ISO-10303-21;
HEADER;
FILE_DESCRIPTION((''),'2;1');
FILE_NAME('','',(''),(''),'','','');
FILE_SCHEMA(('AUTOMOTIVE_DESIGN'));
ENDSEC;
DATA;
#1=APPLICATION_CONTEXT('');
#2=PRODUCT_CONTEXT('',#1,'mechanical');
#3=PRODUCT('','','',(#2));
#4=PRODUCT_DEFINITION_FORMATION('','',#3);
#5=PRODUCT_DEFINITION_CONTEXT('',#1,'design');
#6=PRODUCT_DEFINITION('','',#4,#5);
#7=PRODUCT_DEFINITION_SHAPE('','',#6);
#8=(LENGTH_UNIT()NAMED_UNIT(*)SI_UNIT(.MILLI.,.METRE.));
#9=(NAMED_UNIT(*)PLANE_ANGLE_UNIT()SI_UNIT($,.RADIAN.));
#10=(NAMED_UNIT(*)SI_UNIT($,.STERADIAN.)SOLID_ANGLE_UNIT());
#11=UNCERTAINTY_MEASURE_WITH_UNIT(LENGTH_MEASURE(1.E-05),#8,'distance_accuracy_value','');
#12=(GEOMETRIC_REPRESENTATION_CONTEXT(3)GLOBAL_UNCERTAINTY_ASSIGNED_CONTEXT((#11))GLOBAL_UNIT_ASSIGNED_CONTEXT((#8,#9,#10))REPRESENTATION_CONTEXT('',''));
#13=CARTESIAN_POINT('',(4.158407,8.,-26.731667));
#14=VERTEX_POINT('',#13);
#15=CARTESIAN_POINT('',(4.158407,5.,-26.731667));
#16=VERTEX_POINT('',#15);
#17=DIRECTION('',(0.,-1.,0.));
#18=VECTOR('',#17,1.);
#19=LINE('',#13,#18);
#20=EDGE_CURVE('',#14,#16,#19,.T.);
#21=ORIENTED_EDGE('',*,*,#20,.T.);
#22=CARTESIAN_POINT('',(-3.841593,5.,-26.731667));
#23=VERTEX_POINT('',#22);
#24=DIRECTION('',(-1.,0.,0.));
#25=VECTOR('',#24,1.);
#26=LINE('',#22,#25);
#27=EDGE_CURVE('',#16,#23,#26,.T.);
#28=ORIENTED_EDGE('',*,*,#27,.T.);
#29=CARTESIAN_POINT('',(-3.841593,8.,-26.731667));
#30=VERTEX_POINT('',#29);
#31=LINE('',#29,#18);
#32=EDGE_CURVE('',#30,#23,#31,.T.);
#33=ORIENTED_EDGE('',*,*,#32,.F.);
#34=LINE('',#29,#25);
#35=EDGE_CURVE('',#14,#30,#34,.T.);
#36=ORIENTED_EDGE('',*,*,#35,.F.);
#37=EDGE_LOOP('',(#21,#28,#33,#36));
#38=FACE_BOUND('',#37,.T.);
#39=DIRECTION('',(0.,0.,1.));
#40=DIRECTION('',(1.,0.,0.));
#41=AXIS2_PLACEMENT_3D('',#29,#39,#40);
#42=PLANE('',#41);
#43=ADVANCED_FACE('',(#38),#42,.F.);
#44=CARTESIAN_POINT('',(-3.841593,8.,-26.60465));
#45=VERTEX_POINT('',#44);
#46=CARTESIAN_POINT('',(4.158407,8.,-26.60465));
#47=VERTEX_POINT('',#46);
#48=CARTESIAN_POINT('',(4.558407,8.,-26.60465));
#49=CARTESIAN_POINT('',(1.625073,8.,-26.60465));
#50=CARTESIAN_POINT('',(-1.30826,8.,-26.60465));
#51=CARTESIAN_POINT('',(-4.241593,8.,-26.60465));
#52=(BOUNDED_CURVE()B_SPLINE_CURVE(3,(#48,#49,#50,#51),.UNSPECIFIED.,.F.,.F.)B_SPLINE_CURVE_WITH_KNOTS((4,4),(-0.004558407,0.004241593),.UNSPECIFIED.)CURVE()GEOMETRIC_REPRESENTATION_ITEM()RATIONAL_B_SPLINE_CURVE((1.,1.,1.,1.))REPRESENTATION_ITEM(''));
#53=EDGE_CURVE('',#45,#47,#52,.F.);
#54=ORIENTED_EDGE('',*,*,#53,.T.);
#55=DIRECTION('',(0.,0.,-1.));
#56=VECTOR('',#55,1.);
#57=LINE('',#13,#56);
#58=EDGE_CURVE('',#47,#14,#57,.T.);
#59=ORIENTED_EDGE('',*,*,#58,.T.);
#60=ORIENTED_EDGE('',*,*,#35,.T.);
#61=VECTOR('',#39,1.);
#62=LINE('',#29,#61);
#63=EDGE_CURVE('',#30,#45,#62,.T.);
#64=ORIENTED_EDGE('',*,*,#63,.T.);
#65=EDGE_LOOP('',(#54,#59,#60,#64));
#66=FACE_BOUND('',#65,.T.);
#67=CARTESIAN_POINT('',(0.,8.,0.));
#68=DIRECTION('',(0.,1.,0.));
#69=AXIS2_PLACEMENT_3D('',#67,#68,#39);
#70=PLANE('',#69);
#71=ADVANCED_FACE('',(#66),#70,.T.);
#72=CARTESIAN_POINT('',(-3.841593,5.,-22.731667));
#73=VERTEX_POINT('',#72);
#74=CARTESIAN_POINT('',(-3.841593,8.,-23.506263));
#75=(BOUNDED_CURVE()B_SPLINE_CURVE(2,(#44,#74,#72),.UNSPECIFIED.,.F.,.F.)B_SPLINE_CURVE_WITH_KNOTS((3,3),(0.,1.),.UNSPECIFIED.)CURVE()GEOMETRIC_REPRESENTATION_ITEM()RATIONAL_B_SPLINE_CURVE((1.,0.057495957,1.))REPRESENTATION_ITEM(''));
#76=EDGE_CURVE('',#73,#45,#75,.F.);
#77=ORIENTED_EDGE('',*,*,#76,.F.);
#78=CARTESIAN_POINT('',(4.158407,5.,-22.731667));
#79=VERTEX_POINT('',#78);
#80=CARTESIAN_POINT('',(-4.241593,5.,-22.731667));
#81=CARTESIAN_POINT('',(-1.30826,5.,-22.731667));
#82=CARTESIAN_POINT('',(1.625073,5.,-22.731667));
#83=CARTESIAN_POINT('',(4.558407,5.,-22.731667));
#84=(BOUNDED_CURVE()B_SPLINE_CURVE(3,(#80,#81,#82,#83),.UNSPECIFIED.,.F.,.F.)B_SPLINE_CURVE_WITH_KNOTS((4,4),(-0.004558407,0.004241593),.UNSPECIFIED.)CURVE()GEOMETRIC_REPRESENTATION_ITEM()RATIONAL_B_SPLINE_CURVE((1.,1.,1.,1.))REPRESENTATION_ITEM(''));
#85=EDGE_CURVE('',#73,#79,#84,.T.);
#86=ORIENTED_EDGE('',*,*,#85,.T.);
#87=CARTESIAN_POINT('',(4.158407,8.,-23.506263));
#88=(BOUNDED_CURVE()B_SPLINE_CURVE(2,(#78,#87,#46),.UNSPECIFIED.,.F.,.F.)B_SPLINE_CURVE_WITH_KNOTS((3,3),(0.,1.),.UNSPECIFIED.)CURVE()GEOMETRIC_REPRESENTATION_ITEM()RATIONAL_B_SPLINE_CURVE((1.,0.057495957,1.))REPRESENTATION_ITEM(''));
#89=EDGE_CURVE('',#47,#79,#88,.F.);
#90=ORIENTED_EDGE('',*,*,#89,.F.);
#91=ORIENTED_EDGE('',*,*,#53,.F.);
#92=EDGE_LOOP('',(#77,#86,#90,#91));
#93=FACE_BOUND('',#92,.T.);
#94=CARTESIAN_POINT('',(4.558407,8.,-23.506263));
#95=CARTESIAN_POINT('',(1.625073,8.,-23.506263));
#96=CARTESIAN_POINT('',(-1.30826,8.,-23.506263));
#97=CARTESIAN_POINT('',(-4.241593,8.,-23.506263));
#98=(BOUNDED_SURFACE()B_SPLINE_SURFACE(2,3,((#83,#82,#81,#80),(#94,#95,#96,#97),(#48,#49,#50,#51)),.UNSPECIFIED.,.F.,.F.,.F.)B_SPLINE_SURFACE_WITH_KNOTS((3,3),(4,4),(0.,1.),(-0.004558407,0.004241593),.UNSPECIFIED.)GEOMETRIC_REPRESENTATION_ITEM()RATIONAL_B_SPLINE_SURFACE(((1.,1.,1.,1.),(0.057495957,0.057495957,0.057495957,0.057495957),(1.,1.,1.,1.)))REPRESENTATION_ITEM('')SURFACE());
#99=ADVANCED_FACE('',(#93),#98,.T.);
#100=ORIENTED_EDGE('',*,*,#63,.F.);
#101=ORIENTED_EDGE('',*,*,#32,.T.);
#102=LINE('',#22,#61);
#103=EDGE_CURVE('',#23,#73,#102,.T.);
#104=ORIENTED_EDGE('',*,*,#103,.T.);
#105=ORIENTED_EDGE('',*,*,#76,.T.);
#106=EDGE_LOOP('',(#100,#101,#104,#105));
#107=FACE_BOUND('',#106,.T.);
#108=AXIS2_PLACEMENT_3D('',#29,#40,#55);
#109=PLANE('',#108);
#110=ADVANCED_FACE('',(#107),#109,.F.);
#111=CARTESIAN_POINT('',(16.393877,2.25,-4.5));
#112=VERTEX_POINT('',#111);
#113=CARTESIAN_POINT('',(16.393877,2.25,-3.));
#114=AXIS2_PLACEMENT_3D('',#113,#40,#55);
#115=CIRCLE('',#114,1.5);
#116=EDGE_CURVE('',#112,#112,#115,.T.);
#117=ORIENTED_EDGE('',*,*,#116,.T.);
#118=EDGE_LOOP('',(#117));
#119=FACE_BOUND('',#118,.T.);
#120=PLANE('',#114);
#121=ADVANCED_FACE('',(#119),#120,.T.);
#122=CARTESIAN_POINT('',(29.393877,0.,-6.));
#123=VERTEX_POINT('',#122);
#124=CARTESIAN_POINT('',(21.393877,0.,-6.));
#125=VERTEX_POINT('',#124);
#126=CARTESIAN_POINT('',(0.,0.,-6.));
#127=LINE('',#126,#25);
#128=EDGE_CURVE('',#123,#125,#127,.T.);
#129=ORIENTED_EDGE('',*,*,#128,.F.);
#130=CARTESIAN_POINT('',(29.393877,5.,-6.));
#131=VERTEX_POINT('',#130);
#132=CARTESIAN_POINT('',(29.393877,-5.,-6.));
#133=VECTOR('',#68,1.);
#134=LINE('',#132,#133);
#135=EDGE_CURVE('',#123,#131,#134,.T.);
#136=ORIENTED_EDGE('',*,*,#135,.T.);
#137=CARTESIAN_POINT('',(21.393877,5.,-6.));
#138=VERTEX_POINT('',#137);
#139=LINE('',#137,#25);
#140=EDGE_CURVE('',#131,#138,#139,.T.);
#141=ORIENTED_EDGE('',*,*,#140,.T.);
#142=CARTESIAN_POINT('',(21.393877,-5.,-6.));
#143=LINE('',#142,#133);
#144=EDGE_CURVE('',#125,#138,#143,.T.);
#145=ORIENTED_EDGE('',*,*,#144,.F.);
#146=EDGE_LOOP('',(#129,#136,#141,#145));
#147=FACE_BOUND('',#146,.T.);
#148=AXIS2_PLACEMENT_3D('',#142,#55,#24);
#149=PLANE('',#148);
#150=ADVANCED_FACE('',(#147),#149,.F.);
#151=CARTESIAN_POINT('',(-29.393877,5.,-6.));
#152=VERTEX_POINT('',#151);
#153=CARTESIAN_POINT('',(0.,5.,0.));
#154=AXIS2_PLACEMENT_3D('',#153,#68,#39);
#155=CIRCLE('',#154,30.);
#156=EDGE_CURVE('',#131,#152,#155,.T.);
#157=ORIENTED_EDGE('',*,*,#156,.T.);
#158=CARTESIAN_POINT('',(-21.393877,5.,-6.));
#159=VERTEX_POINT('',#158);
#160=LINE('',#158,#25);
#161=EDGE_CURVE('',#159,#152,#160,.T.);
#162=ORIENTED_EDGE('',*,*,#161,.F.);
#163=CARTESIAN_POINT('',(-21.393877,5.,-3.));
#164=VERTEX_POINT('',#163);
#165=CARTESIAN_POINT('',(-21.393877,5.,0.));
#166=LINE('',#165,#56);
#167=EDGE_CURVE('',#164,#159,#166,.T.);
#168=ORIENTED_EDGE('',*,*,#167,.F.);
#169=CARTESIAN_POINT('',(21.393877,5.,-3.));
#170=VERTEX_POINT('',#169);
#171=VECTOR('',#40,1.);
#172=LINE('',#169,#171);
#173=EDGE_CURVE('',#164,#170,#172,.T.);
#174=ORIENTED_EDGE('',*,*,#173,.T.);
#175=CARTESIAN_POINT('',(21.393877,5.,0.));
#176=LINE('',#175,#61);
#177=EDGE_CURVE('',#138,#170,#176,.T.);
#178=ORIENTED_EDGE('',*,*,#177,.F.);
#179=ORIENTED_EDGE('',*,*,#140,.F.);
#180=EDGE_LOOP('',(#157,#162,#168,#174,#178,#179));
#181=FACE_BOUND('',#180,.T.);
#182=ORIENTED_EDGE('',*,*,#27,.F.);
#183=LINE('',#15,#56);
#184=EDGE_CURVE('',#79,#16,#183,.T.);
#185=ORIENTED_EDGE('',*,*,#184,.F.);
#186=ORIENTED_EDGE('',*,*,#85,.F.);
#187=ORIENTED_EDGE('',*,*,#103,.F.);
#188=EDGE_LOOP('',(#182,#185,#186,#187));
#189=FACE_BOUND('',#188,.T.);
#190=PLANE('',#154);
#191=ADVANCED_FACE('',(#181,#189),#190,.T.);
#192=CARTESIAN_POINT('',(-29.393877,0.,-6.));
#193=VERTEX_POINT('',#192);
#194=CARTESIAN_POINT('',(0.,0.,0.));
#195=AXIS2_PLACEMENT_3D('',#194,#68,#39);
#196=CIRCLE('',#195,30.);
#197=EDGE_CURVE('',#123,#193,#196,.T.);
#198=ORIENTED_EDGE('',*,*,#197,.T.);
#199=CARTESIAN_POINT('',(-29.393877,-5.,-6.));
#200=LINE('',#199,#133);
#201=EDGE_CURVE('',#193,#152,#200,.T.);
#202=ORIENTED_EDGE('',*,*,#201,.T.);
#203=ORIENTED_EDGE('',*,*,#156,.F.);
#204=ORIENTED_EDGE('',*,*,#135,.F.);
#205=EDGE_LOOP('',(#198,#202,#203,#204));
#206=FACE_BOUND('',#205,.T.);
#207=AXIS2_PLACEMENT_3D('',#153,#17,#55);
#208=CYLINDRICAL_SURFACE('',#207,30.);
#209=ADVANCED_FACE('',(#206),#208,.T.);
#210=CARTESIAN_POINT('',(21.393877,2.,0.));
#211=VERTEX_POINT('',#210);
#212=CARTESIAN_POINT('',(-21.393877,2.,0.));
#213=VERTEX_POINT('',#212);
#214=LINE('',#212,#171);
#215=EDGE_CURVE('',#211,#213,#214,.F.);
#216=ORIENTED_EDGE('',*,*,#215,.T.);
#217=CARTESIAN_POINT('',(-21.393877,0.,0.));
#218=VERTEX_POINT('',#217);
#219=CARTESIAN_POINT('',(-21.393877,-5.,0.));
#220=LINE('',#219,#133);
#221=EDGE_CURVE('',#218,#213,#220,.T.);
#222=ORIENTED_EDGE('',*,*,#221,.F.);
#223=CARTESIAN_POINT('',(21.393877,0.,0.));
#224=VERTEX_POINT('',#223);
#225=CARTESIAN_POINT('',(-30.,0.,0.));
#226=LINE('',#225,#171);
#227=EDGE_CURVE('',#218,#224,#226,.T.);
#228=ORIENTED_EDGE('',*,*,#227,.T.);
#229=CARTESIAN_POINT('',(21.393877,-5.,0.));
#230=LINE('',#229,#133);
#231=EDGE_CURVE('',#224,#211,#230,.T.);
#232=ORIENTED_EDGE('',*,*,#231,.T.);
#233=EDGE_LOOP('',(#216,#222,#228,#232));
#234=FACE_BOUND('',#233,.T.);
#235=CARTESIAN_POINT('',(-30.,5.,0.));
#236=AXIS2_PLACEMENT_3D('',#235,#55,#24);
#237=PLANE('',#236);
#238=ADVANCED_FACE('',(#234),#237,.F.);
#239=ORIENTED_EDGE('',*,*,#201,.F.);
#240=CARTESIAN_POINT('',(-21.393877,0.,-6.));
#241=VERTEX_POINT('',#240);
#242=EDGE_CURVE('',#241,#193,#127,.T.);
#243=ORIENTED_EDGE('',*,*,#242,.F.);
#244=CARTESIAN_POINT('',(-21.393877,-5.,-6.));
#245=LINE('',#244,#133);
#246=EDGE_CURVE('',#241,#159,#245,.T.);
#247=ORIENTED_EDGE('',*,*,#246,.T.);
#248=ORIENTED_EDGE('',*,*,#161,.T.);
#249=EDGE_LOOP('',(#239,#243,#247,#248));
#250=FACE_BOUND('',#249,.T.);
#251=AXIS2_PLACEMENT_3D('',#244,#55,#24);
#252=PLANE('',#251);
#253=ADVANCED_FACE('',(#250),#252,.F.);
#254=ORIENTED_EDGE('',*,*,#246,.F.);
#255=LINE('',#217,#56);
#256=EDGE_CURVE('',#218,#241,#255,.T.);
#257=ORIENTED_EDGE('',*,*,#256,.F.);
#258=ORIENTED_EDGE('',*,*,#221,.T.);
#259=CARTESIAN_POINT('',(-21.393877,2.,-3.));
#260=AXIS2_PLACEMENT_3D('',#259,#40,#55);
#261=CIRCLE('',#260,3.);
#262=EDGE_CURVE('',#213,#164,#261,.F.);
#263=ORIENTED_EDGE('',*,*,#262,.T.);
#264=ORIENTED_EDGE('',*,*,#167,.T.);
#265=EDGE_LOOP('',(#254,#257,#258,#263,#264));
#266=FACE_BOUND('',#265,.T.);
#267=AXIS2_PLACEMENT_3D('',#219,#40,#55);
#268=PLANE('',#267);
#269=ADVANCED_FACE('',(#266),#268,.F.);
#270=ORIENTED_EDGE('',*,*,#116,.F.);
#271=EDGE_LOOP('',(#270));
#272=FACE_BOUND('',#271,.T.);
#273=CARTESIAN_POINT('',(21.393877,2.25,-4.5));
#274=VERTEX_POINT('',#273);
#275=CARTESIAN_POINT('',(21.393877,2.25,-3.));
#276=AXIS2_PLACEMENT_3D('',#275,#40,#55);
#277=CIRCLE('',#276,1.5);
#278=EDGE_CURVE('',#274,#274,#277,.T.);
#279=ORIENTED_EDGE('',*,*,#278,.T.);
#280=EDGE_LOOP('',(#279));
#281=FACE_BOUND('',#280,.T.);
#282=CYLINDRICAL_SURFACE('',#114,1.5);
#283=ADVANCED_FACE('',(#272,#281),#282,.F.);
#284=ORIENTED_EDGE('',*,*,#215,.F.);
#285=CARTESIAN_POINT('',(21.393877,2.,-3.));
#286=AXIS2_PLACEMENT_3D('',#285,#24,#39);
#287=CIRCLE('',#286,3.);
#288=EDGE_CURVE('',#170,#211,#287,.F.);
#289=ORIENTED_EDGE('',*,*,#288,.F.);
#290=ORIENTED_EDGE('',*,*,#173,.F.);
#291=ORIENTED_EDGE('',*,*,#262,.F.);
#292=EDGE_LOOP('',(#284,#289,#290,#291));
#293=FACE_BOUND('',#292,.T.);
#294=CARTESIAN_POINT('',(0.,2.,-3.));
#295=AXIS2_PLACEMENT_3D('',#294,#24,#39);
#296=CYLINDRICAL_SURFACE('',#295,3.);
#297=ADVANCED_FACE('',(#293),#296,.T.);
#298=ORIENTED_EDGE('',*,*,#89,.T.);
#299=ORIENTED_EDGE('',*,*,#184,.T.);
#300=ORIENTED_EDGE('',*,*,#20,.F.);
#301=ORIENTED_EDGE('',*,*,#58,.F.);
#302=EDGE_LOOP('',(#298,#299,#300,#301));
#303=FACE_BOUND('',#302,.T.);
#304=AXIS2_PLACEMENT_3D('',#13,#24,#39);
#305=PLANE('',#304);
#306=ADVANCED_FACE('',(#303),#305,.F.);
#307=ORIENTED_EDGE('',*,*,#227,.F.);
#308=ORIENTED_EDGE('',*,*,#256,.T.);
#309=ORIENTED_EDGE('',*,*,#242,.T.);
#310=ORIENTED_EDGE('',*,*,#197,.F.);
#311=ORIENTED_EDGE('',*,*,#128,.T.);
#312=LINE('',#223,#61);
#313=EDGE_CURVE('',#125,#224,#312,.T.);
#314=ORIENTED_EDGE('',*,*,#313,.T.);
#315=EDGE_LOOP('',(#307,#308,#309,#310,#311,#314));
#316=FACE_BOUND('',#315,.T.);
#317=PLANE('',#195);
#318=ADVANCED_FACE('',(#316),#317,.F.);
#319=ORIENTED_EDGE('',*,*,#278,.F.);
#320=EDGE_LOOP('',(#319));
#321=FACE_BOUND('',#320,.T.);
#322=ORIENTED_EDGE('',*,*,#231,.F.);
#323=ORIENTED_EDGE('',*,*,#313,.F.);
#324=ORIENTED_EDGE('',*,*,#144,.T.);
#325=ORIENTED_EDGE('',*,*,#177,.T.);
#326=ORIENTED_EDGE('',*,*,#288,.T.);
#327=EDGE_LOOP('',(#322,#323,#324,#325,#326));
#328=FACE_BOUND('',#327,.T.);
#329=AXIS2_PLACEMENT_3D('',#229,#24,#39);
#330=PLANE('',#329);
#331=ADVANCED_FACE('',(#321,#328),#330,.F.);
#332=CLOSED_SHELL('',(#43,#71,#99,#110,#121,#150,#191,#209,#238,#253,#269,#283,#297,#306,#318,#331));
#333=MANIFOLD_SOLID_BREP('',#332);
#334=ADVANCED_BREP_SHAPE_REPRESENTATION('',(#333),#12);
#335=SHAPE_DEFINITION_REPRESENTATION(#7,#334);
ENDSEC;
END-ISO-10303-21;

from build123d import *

# Parameters (mm, degrees)
BOSS_EXTRUDE1_DEPTH = 5
SKETCH3_W           = 8
SKETCH3_H           = 4
BOSS_EXTRUDE2_DEPTH = 3
FILLET1_START       = -3.841593316
FILLET1_DEPTH       = 8
CUT_EXTRUDE1_START  = -10
CUT_EXTRUDE1_DEPTH  = 10
FILLET2_R           = 3
SKETCH6_R           = 1.5
CUT_EXTRUDE2_DEPTH  = 5


with BuildPart() as part:
    # Sketch1 → Boss-Extrude1 (new body)
    with BuildSketch(Plane(origin=(0, 0, 0), x_dir=(1, 0, 0), z_dir=(0, 1, 0))):
        with BuildLine():
            Line((-30, 0), (30, 0))
            ThreePointArc((30, 0), (0, 30), (-30, 0))
        make_face()
    extrude(amount=BOSS_EXTRUDE1_DEPTH)

    # Sketch3 → Boss-Extrude2 (add)
    with BuildSketch(Plane(origin=(0, 5, 0), x_dir=(1, 0, 0), z_dir=(0, 1, 0))):
        with Locations((0.158406684, 24.731666579)):
            Rectangle(SKETCH3_W, SKETCH3_H)
    extrude(amount=BOSS_EXTRUDE2_DEPTH)

    # Fillet1: read off the stored shape, not the designer's step
    # Fillet1 outline → Fillet1 (cut)
    with BuildSketch(Plane.YZ.offset(FILLET1_START)):
        with BuildLine():
            Line((8, -22.731666579), (5, -22.731666579))
            add(Edge.make_bspline(
                [(5, -22.731666579), (8, -23.506263249), (8, -26.604649926)],
                knots=[0, 0, 0, 1, 1, 1], degree=2, weights=[1, 0.057495957, 1]))
            Line((8, -26.604649926), (8, -22.731666579))
        make_face()
    extrude(amount=FILLET1_DEPTH, mode=Mode.SUBTRACT)

    # Sketch5 → Cut-Extrude1 (cut)
    with BuildSketch(Plane(origin=(0, 5, 0), x_dir=(1, 0, 0), z_dir=(0, 1, 0)).offset(CUT_EXTRUDE1_START)):
        with BuildLine():
            Line((-21.393876913, 0), (-21.393876913, 6))
            Line((-21.393876913, 6), (-29.393876913, 6))
            ThreePointArc((-29.393876913, 6), (-29.84808459, 3.01526886), (-30, 0))
            Line((-30, 0), (-21.393876913, 0))
        make_face()
        with BuildLine():
            Line((21.393876913, 6), (29.393876913, 6))
            ThreePointArc((29.393876913, 6), (29.84808459, 3.01526886), (30, 0))
            Line((30, 0), (21.393876913, 0))
            Line((21.393876913, 0), (21.393876913, 6))
        make_face()
    extrude(amount=CUT_EXTRUDE1_DEPTH, mode=Mode.SUBTRACT)

    # Fillet2
    fillet2_edges = [part.edges().sort_by_distance(p)[0] for p in [
        (0, 5, 0),
    ]]
    fillet(fillet2_edges, radius=FILLET2_R)

    # Sketch6 → Cut-Extrude2 (cut)
    with BuildSketch(Plane(origin=(21.393876913, 0, 0), x_dir=(0, 0, -1), z_dir=(1, 0, 0))):
        with Locations((3, 2.25)):
            Circle(SKETCH6_R)
    extrude(amount=-CUT_EXTRUDE2_DEPTH, mode=Mode.SUBTRACT)


solid = part.part
